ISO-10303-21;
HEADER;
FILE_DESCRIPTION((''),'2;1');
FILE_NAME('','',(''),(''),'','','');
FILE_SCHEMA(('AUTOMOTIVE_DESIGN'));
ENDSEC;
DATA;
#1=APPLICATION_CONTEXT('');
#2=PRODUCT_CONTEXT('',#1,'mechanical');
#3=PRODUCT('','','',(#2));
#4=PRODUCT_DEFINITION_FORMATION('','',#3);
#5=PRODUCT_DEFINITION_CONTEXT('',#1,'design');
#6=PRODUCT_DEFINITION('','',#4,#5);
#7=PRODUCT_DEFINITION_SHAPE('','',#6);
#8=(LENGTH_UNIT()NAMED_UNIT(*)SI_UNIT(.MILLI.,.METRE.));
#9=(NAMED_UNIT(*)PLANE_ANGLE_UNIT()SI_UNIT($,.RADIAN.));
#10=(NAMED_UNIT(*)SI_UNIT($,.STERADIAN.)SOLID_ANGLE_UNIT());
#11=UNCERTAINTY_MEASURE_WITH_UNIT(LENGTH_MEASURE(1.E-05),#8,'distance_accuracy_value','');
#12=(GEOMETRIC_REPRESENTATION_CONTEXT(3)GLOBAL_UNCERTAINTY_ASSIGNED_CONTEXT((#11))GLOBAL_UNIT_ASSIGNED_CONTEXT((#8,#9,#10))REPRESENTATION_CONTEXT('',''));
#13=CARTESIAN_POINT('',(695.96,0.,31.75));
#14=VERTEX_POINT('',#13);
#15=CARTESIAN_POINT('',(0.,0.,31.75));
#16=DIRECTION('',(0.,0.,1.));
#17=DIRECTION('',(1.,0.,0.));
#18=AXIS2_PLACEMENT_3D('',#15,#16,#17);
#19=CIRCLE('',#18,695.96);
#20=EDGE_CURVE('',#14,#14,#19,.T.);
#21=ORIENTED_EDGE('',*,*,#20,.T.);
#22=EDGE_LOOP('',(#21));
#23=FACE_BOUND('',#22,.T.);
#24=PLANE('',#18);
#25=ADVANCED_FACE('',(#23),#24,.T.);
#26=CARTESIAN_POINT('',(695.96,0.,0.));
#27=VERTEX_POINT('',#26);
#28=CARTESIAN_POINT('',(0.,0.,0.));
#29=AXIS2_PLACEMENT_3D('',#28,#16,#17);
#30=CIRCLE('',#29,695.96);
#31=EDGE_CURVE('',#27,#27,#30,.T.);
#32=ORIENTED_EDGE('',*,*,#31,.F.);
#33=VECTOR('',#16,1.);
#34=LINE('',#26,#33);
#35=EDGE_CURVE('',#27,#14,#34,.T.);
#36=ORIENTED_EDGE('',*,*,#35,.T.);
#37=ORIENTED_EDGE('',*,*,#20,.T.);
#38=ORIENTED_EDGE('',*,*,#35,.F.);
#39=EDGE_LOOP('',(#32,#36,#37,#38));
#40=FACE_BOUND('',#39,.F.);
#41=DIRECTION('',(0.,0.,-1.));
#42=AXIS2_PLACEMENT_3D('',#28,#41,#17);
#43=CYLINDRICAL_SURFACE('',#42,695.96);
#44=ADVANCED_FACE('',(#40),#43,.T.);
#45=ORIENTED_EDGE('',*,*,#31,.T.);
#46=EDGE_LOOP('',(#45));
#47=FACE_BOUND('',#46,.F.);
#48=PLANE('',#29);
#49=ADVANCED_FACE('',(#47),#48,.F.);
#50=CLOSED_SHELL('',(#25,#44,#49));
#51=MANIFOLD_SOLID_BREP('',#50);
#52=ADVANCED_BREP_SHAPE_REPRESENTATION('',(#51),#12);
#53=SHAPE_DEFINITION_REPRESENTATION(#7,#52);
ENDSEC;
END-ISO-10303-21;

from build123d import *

# Parameters (mm, degrees)
F0_R     = 695.96
F0_R_2   = 675.64
F0_R_3   = 228.6
F0_R_4   = 199.2364019363
F0_R_5   = 152.4
F0_R_6   = 101.6
F1_DEPTH = 31.75


# Not quite as in the source:
# - the program builds the solid bodies; features that only make, move or delete a surface that nothing else refers to are left out


with BuildPart() as f1:
    # F0 (on Top) → F1 (new body)
    with BuildSketch(Plane.XY):
        Circle(F0_R)
        Circle(F0_R_2, mode=Mode.SUBTRACT)
        Circle(F0_R_2)
        Circle(F0_R_3, mode=Mode.SUBTRACT)
        Circle(F0_R_3)
        Circle(F0_R_4, mode=Mode.SUBTRACT)
        Circle(F0_R_4)
        Circle(F0_R_5, mode=Mode.SUBTRACT)
        Circle(F0_R_5)
        Circle(F0_R_6, mode=Mode.SUBTRACT)
        Circle(F0_R_6)
    extrude(amount=F1_DEPTH)


solid = f1.part
